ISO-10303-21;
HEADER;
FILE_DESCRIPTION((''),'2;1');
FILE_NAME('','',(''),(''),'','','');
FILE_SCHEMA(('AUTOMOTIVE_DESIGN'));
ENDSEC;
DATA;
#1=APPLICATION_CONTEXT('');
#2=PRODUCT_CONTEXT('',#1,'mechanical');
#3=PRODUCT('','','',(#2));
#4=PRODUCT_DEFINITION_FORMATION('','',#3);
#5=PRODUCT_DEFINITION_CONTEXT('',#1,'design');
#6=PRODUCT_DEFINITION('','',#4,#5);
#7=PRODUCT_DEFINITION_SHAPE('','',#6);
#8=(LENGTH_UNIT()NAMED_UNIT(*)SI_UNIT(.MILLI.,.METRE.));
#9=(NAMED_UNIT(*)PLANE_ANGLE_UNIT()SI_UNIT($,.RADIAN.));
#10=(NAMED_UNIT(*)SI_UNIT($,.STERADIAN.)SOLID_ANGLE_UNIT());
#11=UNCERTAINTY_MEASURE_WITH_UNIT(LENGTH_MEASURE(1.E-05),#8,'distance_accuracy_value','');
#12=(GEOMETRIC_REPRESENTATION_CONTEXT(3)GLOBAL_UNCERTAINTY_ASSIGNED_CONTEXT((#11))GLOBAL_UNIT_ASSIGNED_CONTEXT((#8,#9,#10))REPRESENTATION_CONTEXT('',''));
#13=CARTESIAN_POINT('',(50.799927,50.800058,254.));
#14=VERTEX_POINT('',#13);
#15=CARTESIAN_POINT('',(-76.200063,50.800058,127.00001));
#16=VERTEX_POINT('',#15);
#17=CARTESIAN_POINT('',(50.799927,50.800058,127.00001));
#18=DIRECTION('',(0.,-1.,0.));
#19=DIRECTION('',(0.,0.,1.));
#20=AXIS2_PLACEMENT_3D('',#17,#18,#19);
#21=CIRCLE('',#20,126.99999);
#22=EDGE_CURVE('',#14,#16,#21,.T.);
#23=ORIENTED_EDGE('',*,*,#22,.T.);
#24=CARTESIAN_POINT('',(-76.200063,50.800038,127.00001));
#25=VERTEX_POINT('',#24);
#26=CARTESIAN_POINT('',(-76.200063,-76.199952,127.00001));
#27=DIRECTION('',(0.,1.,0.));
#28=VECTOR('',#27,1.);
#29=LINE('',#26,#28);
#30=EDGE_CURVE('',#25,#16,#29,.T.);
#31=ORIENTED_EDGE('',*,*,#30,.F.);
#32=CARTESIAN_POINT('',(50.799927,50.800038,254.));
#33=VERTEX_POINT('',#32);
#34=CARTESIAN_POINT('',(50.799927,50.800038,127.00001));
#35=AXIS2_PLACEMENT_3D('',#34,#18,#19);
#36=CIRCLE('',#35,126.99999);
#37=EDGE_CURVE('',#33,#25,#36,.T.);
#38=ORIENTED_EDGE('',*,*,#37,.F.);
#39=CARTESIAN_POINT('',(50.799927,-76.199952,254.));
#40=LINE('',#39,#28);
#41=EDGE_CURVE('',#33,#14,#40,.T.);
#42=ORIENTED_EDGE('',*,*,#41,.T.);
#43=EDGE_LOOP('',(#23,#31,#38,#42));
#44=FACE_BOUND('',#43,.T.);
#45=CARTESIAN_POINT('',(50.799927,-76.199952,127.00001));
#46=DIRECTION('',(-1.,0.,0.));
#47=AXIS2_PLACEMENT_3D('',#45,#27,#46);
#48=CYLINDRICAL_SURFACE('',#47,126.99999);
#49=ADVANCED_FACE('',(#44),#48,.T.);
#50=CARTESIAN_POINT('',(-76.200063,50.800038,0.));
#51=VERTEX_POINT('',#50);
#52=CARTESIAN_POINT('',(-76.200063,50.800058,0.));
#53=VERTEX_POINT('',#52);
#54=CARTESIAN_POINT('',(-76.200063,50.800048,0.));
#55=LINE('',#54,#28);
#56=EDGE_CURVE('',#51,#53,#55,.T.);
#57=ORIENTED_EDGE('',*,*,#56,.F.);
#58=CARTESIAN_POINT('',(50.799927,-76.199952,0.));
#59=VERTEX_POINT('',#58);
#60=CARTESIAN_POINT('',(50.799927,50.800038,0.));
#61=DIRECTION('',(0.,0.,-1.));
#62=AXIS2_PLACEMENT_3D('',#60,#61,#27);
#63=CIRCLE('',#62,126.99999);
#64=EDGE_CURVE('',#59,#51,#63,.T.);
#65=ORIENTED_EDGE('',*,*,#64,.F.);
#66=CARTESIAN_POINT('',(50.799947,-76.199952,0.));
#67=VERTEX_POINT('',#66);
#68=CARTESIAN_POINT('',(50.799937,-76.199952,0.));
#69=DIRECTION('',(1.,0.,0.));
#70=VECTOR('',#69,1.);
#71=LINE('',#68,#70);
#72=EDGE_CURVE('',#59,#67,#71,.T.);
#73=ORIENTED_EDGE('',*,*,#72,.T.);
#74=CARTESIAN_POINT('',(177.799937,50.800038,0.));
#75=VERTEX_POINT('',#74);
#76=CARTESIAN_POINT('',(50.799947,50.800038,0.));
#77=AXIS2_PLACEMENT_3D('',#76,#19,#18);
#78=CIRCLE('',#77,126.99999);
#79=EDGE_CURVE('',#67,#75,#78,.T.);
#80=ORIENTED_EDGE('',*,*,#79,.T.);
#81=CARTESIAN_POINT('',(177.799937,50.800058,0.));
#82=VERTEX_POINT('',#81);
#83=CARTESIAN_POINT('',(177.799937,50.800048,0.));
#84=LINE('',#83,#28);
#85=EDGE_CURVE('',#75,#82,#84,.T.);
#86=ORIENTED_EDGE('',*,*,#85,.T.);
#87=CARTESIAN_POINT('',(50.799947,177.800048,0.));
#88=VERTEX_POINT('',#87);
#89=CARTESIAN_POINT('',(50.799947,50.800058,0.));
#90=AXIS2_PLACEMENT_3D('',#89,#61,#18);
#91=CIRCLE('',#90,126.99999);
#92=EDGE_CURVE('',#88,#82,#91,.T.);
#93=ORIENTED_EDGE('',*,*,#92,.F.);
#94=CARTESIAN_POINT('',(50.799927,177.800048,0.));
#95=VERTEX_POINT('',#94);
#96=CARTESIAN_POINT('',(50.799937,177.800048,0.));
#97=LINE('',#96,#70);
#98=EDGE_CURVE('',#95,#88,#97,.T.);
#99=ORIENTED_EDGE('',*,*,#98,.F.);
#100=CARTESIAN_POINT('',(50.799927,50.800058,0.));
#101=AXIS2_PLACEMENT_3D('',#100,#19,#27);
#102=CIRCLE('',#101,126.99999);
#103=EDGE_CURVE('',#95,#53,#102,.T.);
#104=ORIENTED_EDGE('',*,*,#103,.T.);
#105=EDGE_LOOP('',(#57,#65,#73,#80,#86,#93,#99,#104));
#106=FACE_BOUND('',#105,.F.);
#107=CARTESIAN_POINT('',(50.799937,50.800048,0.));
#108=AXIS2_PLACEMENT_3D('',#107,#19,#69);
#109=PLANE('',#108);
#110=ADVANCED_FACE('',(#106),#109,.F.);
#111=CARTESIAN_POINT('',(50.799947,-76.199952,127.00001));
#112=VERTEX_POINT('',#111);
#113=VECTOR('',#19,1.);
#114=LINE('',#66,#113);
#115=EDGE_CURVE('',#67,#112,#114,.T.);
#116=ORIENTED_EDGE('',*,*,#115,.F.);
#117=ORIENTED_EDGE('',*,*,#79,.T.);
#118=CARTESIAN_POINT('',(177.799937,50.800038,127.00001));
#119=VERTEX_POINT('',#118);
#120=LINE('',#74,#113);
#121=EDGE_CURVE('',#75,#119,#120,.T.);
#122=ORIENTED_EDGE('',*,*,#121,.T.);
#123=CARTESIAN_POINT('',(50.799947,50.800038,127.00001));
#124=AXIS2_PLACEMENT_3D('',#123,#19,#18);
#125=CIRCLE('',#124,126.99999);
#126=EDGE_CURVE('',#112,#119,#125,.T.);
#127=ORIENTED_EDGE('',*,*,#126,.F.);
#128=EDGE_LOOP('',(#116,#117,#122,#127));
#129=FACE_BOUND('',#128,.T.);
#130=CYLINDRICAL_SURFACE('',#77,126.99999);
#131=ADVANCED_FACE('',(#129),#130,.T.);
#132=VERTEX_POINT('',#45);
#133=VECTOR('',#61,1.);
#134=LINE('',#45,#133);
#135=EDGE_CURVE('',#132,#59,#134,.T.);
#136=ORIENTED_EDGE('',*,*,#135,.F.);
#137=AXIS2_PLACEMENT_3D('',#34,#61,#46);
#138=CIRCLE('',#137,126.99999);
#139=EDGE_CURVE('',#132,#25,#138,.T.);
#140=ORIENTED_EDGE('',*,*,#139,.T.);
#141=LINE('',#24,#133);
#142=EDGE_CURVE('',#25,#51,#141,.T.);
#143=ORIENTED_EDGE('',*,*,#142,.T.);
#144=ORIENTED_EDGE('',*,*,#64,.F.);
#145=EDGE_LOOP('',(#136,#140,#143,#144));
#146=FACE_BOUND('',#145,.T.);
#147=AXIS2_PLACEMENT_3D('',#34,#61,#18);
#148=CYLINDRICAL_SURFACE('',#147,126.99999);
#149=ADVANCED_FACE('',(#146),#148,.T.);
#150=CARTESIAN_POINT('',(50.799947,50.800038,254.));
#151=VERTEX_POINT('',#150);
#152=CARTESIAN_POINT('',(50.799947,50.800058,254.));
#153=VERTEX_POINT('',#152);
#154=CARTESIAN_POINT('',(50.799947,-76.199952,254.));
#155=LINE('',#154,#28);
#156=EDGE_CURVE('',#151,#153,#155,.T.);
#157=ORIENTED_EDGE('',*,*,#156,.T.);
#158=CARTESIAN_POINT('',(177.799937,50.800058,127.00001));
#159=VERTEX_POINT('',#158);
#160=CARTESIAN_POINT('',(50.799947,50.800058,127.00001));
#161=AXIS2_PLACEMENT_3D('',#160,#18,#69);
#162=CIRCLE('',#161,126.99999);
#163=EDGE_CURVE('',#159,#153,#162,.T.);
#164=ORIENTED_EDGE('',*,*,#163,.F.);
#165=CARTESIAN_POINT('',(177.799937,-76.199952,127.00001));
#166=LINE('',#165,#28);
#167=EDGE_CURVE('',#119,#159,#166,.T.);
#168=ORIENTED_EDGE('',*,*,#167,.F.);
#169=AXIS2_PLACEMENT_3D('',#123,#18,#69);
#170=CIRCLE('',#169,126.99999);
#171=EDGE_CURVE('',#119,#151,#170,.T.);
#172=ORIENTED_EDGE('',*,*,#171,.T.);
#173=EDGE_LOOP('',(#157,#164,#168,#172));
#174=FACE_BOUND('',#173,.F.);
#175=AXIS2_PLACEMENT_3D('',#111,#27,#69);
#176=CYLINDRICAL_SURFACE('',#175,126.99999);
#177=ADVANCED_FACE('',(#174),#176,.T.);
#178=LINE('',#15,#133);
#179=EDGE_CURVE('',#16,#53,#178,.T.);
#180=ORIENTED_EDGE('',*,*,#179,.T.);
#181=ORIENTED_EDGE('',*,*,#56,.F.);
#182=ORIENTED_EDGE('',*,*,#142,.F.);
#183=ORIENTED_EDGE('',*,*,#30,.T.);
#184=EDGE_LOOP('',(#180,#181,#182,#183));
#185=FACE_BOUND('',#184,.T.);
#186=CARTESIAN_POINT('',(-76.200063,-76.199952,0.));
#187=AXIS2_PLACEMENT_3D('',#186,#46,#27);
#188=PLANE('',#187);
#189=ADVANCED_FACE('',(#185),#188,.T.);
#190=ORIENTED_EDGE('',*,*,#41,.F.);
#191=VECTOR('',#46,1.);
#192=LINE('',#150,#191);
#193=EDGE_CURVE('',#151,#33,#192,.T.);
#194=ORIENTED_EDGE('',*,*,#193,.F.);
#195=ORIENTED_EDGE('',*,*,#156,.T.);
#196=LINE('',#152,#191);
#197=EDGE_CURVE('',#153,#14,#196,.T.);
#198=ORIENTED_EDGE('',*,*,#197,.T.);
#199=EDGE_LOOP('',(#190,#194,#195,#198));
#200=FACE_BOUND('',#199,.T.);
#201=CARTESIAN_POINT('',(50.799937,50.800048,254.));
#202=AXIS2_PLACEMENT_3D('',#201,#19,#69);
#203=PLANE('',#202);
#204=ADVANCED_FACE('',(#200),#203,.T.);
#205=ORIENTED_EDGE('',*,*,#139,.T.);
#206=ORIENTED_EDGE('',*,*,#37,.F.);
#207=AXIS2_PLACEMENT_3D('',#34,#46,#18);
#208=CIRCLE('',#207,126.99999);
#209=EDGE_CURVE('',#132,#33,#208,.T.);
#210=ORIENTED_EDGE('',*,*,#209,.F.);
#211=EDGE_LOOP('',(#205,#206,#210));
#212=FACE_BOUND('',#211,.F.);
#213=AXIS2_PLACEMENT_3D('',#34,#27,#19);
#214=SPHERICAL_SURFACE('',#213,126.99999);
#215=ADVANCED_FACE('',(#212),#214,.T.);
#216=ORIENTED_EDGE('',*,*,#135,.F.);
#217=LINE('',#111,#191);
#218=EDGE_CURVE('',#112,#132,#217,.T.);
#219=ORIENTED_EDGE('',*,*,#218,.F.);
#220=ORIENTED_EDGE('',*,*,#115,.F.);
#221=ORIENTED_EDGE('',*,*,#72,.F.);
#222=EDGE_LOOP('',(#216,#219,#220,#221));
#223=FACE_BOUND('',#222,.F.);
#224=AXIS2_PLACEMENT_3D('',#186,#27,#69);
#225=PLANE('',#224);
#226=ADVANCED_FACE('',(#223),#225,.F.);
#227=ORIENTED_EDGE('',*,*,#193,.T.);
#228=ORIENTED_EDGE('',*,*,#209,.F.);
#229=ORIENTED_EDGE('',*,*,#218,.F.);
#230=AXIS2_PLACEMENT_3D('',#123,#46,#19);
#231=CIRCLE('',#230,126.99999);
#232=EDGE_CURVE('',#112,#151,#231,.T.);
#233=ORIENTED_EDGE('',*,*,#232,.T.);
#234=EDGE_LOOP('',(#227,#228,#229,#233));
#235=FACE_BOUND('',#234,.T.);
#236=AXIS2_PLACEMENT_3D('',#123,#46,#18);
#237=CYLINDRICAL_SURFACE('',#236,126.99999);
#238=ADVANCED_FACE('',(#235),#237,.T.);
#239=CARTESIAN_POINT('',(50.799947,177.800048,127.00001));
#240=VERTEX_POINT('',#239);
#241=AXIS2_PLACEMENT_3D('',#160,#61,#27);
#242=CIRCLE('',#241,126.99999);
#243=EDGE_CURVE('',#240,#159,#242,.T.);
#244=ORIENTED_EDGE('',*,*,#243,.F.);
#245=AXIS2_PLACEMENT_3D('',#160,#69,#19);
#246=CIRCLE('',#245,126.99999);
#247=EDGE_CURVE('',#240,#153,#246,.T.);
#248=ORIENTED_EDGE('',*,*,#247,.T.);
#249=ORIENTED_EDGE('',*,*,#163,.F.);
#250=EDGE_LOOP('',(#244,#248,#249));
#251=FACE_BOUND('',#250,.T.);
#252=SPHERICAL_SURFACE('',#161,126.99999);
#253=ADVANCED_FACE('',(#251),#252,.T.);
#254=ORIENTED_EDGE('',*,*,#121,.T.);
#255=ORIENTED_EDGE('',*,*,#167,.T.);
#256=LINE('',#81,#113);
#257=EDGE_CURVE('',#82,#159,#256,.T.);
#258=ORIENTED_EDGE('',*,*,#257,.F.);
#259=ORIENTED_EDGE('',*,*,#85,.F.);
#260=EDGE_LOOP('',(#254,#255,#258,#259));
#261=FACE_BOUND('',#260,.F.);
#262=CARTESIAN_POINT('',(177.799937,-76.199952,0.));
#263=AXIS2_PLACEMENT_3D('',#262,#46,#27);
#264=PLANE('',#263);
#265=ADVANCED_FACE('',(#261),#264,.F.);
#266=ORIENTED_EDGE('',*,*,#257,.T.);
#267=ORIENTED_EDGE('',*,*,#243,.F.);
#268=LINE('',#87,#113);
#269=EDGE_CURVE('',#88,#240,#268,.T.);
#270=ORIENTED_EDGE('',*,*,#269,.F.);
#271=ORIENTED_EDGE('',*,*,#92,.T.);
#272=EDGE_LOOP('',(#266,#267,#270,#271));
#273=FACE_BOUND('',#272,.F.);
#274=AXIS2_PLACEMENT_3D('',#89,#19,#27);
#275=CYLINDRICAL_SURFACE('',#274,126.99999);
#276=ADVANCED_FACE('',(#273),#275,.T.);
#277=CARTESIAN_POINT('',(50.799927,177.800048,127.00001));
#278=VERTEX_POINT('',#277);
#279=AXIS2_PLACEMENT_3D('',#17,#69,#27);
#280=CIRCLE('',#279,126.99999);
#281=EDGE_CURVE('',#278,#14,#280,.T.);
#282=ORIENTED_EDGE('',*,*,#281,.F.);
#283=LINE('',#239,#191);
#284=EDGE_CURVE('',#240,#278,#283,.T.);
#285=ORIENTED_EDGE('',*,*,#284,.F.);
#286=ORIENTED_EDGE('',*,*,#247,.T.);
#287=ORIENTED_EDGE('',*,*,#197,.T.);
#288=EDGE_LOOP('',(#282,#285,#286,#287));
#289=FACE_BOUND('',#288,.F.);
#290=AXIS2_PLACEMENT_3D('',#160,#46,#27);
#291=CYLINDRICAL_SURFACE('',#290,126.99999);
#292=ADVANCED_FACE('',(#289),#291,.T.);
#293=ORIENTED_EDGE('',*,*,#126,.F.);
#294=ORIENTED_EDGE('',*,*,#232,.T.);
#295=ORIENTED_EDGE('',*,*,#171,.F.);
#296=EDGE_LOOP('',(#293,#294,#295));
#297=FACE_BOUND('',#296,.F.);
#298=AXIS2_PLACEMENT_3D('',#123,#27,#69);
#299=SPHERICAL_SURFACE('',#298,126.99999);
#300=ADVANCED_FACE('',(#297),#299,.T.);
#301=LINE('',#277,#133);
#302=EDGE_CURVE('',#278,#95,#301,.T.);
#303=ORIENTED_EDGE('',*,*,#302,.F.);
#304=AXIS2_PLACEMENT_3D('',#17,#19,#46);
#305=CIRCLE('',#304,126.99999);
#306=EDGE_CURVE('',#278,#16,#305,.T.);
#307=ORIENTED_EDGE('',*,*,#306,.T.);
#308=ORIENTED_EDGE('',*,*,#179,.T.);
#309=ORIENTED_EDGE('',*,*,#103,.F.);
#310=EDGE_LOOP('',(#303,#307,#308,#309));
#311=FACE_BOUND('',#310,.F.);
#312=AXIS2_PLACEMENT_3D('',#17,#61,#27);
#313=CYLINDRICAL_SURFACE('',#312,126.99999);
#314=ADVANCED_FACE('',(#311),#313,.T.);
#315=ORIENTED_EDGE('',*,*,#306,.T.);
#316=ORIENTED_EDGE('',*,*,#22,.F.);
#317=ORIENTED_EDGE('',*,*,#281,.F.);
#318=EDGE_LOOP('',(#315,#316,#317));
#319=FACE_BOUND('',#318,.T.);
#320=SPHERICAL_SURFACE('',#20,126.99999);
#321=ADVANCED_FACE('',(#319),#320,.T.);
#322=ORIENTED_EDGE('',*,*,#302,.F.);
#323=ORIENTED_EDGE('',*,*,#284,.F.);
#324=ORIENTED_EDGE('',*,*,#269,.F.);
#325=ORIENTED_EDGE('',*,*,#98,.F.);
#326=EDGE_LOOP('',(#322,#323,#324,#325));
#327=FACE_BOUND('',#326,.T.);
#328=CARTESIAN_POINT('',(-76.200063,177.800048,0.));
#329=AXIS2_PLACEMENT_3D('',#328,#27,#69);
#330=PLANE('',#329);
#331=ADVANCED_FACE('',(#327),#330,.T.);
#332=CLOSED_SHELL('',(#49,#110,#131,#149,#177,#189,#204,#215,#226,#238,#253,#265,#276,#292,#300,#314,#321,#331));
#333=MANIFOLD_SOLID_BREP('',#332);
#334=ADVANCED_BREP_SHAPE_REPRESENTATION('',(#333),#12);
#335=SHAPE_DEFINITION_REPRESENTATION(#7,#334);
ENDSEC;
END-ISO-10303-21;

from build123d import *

# Parameters (mm, degrees)
F0_W     = 254
F0_H     = 254
F1_DEPTH = 254
F2_R     = 126.99999
F3_R     = 126.99999


# Not quite as in the source:
# - a fillet or chamfer is up to 0.001 mm smaller than in the source, because OpenCascade refuses the exact size


with BuildPart() as f1:
    # F0 (on Top) → F1 (new body)
    with BuildSketch(Plane.XY):
        with Locations((50.79993667, 50.8000484288)):
            Rectangle(F0_W, F0_H)
    extrude(amount=F1_DEPTH)

    # F2 (radius 127 in the source; OpenCascade refuses exactly that, so slightly less here)
    f2_edges = [f1.edges().sort_by_distance(p)[0] for p in [
        (-76.200063, 50.800048, 254),
        (177.799937, 50.800048, 254),
    ]]
    fillet(f2_edges, radius=F2_R)

    # F3 (radius 127 in the source; OpenCascade refuses exactly that, so slightly less here)
    f3_edges = [f1.edges().sort_by_distance(p)[0] for p in [
        (140.602501, 177.800048, 216.802564),
        (177.799937, 177.800048, 63.500005),
        (-76.200063, 177.800048, 63.500005),
        (140.602501, -76.199952, 216.802564),
    ]]
    fillet(f3_edges, radius=F3_R)


solid = f1.part
